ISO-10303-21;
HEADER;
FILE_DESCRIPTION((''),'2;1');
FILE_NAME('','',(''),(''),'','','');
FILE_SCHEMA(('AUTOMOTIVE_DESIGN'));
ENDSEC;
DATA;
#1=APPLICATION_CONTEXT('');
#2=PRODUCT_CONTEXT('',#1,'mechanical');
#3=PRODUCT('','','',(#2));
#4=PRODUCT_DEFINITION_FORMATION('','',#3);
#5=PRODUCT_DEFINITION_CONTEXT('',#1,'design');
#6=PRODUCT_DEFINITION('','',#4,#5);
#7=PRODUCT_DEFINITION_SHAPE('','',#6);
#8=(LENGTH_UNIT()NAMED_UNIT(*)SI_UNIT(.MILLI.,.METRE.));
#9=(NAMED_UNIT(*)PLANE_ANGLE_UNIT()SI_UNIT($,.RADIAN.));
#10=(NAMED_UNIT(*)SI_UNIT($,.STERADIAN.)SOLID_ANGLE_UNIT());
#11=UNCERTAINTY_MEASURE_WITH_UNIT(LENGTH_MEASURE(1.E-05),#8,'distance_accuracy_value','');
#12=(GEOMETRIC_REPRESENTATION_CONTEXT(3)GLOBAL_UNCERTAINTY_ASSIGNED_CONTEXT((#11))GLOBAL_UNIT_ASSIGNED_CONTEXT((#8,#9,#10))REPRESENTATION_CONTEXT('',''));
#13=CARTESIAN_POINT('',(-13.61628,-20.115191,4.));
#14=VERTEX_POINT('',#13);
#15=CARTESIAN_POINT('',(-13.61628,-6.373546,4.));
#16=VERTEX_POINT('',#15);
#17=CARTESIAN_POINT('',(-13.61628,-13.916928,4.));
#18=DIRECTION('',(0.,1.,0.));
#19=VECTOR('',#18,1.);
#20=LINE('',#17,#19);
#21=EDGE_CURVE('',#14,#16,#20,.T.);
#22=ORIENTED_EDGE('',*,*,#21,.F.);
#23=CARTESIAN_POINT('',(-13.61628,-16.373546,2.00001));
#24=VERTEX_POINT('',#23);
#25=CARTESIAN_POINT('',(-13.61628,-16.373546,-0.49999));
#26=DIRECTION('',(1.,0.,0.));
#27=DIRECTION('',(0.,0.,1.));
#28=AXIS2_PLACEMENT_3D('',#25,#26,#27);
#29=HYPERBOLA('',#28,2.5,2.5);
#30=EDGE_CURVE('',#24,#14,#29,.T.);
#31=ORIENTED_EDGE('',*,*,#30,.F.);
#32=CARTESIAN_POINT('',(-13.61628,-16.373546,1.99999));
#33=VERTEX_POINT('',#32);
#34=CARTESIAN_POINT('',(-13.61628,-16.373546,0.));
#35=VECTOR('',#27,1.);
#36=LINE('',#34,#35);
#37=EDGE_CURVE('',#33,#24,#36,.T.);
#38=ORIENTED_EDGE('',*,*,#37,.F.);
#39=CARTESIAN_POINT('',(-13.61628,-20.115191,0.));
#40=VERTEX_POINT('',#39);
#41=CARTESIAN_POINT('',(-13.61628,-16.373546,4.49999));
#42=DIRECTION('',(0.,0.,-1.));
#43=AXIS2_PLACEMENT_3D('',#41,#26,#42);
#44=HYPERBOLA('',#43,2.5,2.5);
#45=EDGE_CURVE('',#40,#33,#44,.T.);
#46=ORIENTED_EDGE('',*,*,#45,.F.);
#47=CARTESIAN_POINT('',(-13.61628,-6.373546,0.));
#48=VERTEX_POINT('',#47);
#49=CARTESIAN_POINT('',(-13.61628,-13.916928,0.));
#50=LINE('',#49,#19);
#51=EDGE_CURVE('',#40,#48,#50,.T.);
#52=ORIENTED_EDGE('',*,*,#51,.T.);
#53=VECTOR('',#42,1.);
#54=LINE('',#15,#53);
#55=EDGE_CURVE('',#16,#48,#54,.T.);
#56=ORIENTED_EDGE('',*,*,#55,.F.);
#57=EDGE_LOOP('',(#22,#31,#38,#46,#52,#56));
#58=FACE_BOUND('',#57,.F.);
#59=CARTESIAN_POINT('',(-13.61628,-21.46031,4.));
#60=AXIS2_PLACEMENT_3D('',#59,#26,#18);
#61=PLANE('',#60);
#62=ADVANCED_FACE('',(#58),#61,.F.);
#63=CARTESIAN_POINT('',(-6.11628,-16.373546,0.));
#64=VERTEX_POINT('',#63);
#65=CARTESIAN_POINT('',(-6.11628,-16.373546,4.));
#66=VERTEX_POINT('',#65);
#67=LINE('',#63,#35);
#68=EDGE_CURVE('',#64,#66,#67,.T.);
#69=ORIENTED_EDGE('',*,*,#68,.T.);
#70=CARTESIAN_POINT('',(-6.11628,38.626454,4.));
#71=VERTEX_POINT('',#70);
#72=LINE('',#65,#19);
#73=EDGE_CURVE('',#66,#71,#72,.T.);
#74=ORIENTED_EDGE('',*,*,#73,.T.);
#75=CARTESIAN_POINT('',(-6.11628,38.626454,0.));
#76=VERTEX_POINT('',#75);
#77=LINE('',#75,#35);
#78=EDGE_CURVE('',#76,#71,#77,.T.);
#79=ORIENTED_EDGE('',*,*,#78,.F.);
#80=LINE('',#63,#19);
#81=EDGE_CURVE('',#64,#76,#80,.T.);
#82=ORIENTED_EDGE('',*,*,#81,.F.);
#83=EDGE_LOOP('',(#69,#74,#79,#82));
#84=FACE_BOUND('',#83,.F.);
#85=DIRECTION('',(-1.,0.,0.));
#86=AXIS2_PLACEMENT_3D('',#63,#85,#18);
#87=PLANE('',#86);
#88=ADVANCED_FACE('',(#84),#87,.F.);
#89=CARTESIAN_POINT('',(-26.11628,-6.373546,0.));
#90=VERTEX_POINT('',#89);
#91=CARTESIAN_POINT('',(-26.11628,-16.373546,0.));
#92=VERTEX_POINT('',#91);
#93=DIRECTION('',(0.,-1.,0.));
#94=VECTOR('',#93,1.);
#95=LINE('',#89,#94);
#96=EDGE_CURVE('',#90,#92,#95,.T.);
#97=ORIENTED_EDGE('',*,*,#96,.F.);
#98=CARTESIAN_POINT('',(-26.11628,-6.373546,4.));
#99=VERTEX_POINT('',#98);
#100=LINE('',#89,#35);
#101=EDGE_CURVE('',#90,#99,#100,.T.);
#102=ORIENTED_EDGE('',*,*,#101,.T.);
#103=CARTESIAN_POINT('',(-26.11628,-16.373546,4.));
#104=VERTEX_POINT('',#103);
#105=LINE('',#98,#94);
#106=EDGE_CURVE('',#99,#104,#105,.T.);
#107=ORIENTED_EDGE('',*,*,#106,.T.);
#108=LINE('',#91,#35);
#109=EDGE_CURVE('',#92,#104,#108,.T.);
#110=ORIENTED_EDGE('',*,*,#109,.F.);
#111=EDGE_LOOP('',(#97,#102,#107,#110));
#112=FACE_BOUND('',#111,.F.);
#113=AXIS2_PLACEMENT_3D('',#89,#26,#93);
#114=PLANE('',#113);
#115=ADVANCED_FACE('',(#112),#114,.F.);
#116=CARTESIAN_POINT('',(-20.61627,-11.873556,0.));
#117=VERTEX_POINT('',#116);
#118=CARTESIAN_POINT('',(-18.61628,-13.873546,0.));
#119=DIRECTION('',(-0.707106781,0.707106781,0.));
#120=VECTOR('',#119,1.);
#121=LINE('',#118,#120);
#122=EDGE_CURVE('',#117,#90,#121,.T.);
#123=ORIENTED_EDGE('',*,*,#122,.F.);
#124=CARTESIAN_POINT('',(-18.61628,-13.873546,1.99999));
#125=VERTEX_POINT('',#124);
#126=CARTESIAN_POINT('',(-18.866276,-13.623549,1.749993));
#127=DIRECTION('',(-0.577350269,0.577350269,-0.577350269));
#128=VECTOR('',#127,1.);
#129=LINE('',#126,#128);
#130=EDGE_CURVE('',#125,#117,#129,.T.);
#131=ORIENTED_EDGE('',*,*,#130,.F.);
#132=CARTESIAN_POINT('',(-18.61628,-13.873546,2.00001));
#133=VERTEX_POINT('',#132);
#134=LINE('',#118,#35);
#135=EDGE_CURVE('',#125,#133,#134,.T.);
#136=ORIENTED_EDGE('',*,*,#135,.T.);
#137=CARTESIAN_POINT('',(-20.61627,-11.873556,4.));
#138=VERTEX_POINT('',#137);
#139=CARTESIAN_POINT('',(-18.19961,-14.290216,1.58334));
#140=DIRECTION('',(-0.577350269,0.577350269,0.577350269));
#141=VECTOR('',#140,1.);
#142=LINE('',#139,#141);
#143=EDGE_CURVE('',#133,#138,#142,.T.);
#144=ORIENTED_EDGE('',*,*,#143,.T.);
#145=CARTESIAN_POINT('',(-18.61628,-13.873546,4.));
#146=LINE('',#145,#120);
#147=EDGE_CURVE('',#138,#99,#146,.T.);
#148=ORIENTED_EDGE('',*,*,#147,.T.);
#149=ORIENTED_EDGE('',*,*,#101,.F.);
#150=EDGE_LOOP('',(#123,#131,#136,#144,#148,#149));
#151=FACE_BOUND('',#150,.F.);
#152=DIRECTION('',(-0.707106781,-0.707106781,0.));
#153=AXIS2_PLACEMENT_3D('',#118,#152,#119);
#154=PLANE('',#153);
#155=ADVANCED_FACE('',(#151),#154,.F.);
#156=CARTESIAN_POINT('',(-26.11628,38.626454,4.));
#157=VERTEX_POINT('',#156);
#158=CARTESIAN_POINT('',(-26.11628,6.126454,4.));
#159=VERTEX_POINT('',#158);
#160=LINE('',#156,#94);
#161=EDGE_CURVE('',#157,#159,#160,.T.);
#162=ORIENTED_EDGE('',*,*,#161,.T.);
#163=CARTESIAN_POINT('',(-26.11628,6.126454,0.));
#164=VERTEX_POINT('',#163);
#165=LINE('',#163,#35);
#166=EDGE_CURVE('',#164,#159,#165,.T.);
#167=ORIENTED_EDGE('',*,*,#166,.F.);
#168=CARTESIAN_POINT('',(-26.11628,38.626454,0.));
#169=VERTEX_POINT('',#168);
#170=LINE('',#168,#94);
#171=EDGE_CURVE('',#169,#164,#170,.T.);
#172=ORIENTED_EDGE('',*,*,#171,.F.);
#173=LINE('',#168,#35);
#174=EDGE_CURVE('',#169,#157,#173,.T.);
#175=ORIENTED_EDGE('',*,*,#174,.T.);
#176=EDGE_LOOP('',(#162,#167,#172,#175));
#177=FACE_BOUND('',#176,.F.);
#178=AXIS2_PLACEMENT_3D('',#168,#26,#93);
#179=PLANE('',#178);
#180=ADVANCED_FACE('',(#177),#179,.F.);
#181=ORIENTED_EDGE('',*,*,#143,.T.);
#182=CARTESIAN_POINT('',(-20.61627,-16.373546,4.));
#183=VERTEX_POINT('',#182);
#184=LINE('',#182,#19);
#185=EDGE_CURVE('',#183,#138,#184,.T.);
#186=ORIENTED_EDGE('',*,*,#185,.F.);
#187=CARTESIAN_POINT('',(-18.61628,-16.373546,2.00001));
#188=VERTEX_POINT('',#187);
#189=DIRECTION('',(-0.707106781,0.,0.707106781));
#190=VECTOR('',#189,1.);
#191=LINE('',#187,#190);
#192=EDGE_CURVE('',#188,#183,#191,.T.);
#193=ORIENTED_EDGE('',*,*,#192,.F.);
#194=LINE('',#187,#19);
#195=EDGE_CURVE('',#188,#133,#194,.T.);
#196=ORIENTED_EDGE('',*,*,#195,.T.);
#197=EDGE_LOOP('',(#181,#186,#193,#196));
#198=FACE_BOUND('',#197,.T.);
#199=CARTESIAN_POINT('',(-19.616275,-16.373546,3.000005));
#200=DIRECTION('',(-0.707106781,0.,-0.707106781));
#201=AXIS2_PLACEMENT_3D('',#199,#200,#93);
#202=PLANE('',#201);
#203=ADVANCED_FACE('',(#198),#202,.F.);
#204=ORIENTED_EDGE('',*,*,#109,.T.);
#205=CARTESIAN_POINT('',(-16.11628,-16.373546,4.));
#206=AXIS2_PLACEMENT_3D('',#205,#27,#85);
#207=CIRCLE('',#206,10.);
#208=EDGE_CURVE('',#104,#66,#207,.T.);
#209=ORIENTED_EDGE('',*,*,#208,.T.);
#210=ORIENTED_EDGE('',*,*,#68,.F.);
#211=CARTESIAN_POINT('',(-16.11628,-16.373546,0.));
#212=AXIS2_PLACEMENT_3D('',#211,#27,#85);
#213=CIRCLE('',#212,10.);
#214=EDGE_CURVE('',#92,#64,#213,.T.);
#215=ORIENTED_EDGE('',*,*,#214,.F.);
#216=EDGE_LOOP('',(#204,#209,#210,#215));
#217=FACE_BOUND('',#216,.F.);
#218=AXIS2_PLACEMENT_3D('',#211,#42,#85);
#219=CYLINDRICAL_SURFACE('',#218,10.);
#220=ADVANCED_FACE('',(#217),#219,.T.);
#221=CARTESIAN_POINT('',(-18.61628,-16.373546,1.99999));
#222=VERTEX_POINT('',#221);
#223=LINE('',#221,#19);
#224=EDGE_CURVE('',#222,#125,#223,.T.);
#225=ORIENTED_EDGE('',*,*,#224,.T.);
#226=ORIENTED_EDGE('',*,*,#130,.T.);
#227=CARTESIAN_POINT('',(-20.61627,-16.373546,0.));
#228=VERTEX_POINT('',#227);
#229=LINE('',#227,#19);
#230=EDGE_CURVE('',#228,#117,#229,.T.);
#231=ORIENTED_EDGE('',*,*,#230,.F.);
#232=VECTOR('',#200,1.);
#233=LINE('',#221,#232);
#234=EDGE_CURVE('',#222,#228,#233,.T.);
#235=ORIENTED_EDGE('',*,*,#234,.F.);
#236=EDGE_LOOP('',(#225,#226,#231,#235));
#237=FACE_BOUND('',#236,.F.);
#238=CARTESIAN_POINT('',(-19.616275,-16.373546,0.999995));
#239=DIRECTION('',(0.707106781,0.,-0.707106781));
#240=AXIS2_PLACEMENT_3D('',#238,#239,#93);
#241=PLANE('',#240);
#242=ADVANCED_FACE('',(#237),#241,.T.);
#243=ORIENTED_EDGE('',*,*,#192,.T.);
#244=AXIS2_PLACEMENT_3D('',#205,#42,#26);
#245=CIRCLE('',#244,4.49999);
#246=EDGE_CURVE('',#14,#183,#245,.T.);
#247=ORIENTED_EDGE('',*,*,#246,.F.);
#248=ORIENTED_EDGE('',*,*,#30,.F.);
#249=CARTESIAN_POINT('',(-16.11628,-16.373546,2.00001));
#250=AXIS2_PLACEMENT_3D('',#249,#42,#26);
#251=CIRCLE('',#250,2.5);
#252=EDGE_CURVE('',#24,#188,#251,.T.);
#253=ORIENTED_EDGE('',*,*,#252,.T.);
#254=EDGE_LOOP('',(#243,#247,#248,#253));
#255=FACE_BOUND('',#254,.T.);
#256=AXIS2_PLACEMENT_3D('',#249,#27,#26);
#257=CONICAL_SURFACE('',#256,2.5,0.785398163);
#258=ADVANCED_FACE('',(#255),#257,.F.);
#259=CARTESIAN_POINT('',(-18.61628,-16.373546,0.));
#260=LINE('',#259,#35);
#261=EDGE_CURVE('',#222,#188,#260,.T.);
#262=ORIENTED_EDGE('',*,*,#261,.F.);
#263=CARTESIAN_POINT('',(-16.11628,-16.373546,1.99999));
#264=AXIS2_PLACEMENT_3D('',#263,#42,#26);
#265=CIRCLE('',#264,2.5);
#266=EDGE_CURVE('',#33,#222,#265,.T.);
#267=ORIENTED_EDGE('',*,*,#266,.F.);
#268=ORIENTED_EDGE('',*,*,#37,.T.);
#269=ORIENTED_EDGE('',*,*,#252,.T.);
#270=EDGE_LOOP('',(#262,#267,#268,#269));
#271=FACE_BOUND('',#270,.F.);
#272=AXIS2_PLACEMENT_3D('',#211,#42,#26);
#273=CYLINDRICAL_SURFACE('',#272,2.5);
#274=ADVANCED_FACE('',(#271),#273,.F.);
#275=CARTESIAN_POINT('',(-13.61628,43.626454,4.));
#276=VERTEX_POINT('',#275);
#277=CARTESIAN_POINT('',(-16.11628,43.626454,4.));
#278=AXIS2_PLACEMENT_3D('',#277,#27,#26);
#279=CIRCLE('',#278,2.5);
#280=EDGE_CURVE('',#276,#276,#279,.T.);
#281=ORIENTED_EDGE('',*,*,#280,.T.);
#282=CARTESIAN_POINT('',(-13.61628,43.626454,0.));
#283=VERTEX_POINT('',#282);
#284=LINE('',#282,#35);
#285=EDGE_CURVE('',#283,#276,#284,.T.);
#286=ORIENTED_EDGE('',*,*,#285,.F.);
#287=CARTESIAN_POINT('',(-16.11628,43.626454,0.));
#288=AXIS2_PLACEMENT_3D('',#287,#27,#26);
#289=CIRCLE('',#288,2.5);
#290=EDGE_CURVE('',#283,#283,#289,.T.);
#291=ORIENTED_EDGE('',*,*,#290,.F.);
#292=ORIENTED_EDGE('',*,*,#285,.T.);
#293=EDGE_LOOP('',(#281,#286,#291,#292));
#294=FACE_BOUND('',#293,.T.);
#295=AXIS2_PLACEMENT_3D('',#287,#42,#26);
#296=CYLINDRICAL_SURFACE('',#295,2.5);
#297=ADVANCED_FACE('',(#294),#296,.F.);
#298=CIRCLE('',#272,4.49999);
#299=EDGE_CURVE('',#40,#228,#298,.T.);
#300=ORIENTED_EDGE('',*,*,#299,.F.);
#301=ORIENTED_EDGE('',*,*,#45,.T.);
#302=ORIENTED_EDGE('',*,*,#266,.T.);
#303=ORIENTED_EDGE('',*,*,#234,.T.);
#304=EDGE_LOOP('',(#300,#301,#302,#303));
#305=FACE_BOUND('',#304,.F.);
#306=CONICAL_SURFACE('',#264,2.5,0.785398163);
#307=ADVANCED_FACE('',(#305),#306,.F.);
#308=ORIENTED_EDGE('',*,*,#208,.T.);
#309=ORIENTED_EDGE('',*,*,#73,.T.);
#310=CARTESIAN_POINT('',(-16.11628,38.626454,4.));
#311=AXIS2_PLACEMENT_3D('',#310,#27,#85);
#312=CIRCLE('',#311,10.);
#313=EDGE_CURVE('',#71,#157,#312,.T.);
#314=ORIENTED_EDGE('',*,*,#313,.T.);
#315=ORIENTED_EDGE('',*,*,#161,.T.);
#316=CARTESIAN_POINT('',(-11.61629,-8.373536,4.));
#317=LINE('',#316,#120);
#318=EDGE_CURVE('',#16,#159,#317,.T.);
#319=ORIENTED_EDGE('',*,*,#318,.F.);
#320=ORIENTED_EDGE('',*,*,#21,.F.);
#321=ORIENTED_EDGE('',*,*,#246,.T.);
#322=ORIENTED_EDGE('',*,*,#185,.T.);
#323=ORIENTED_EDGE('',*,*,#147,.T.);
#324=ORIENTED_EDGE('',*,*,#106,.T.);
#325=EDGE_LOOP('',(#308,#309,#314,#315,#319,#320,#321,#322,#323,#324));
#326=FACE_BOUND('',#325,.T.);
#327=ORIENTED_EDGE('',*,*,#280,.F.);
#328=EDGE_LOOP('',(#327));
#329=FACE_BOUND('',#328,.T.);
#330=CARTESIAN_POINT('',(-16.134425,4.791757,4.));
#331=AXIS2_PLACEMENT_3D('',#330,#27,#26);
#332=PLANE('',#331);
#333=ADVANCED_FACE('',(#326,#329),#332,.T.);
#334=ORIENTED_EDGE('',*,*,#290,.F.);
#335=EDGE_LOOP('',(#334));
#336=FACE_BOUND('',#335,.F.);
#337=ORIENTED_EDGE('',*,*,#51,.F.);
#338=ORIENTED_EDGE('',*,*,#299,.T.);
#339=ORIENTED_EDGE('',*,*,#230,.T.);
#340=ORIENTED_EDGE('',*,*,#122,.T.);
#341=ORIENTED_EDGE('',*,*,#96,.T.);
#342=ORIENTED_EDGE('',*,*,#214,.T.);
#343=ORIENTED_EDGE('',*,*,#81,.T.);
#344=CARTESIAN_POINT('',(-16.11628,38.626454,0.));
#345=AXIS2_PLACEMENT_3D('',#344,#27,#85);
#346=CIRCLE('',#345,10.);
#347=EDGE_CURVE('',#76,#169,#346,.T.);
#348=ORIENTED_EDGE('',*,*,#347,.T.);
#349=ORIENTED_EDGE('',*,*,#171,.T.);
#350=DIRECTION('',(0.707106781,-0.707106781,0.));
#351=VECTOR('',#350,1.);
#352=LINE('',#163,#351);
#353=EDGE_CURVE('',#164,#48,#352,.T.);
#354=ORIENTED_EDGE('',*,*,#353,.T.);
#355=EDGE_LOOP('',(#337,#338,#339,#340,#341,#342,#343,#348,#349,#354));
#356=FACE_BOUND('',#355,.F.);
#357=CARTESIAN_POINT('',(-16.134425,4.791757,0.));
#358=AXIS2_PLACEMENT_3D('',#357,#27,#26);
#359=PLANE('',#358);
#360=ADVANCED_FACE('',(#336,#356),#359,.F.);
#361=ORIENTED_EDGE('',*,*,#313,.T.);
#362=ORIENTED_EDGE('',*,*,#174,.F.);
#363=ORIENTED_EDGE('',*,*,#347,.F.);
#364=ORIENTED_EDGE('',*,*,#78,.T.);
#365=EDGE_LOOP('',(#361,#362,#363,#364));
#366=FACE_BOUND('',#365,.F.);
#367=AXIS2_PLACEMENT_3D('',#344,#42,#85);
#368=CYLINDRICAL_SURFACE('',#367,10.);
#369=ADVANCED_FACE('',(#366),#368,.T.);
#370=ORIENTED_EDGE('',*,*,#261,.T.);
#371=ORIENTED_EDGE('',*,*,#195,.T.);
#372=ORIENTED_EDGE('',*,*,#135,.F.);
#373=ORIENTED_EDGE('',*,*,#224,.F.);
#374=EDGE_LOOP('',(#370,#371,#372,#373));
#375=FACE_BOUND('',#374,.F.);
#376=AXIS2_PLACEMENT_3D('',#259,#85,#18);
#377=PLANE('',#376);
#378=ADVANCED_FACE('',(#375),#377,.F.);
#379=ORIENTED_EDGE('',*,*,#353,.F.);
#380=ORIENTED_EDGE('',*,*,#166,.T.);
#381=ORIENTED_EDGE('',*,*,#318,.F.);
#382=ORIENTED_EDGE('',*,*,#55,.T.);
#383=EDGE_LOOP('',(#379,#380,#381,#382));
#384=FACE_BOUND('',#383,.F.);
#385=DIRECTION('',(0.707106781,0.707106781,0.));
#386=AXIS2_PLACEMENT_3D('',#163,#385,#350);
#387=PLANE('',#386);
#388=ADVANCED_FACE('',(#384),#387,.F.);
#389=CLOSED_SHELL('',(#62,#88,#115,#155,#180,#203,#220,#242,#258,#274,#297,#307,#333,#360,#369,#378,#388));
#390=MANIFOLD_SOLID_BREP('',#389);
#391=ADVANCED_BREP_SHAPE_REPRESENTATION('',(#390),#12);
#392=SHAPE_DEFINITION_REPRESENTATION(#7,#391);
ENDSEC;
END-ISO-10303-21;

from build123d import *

# Parameters (mm, degrees)
F0_R     = 2.5
F1_DEPTH = 4
F2_SIZE  = 1.99999
F3_W     = 3.2302876376
F3_H     = 15.0867640845
F4_DEPTH = 4


# Not quite as in the source:
# - a fillet or chamfer is up to 0.001 mm smaller than in the source, because OpenCascade refuses the exact size


with BuildPart() as f1:
    # F0 (on Top) → F1 (new body)
    with BuildSketch(Plane.XY):
        with BuildLine():
            ThreePointArc((-6.116279643, 38.6264544598), (-16.116279643, 28.6264544598), (-26.116279643, 38.6264544598))
            Line((-26.116279643, 38.6264544598), (-26.116279643, 6.1264544598))
            Line((-26.116279643, 6.1264544598), (-16.116279643, -3.8735455402))
            Line((-16.116279643, -3.8735455402), (-13.616279643, -6.3735455402))
            Line((-13.616279643, -6.3735455402), (-13.616279643, -12.0434185212))
            Line((-13.616279643, -12.0434185212), (-13.616279643, -16.3735455402))
            Line((-13.616279643, -16.3735455402), (-13.616279643, -20.7036725591))
            ThreePointArc((-13.616279643, -20.7036725591), (-18.616279643, -20.7036725591), (-21.116279643, -16.3735455402))
            Line((-21.116279643, -16.3735455402), (-21.116279643, -11.3735455402))
            Line((-21.116279643, -11.3735455402), (-26.116279643, -6.3735455402))
            Line((-26.116279643, -6.3735455402), (-26.116279643, -16.3735455402))
            ThreePointArc((-26.116279643, -16.3735455402), (-16.116279643, -26.3735455402), (-6.116279643, -16.3735455402))
            Line((-6.116279643, -16.3735455402), (-6.116279643, 38.6264544598))
        make_face()
        with BuildLine():
            ThreePointArc((-6.116279643, 38.6264544598), (-16.116279643, 48.6264544598), (-26.116279643, 38.6264544598))
            ThreePointArc((-26.116279643, 38.6264544598), (-16.116279643, 28.6264544598), (-6.116279643, 38.6264544598))
        make_face()
        with Locations((-16.116279643, 43.6264544598)):
            Circle(F0_R, mode=Mode.SUBTRACT)
        with BuildLine():
            Line((-13.616279643, -20.7036725591), (-13.616279643, -16.3735455402))
            ThreePointArc((-13.616279643, -16.3735455402), (-16.116279643, -18.8735455402), (-18.616279643, -16.3735455402))
            Line((-18.616279643, -16.3735455402), (-18.616279643, -13.8735455402))
            Line((-18.616279643, -13.8735455402), (-21.116279643, -11.3735455402))
            Line((-21.116279643, -11.3735455402), (-21.116279643, -16.3735455402))
            ThreePointArc((-21.116279643, -16.3735455402), (-18.616279643, -20.7036725591), (-13.616279643, -20.7036725591))
        make_face()
    extrude(amount=F1_DEPTH)

    # F2 (size 2 in the source; OpenCascade refuses exactly that, so slightly less here)
    f2_edges = [f1.edges().sort_by_distance(p)[0] for p in [
        (-16.11628, -18.873546, 4),
        (-18.61628, -15.123546, 4),
        (-16.11628, -18.873546, 0),
    ]]
    chamfer(f2_edges, length=F2_SIZE)

    # F3 (on face) → F4 (join)
    with BuildSketch(Plane.XY.offset(4)):
        with Locations((-12.0011358242, -13.9169275824)):
            Rectangle(F3_W, F3_H)
    extrude(amount=-F4_DEPTH)


solid = f1.part
